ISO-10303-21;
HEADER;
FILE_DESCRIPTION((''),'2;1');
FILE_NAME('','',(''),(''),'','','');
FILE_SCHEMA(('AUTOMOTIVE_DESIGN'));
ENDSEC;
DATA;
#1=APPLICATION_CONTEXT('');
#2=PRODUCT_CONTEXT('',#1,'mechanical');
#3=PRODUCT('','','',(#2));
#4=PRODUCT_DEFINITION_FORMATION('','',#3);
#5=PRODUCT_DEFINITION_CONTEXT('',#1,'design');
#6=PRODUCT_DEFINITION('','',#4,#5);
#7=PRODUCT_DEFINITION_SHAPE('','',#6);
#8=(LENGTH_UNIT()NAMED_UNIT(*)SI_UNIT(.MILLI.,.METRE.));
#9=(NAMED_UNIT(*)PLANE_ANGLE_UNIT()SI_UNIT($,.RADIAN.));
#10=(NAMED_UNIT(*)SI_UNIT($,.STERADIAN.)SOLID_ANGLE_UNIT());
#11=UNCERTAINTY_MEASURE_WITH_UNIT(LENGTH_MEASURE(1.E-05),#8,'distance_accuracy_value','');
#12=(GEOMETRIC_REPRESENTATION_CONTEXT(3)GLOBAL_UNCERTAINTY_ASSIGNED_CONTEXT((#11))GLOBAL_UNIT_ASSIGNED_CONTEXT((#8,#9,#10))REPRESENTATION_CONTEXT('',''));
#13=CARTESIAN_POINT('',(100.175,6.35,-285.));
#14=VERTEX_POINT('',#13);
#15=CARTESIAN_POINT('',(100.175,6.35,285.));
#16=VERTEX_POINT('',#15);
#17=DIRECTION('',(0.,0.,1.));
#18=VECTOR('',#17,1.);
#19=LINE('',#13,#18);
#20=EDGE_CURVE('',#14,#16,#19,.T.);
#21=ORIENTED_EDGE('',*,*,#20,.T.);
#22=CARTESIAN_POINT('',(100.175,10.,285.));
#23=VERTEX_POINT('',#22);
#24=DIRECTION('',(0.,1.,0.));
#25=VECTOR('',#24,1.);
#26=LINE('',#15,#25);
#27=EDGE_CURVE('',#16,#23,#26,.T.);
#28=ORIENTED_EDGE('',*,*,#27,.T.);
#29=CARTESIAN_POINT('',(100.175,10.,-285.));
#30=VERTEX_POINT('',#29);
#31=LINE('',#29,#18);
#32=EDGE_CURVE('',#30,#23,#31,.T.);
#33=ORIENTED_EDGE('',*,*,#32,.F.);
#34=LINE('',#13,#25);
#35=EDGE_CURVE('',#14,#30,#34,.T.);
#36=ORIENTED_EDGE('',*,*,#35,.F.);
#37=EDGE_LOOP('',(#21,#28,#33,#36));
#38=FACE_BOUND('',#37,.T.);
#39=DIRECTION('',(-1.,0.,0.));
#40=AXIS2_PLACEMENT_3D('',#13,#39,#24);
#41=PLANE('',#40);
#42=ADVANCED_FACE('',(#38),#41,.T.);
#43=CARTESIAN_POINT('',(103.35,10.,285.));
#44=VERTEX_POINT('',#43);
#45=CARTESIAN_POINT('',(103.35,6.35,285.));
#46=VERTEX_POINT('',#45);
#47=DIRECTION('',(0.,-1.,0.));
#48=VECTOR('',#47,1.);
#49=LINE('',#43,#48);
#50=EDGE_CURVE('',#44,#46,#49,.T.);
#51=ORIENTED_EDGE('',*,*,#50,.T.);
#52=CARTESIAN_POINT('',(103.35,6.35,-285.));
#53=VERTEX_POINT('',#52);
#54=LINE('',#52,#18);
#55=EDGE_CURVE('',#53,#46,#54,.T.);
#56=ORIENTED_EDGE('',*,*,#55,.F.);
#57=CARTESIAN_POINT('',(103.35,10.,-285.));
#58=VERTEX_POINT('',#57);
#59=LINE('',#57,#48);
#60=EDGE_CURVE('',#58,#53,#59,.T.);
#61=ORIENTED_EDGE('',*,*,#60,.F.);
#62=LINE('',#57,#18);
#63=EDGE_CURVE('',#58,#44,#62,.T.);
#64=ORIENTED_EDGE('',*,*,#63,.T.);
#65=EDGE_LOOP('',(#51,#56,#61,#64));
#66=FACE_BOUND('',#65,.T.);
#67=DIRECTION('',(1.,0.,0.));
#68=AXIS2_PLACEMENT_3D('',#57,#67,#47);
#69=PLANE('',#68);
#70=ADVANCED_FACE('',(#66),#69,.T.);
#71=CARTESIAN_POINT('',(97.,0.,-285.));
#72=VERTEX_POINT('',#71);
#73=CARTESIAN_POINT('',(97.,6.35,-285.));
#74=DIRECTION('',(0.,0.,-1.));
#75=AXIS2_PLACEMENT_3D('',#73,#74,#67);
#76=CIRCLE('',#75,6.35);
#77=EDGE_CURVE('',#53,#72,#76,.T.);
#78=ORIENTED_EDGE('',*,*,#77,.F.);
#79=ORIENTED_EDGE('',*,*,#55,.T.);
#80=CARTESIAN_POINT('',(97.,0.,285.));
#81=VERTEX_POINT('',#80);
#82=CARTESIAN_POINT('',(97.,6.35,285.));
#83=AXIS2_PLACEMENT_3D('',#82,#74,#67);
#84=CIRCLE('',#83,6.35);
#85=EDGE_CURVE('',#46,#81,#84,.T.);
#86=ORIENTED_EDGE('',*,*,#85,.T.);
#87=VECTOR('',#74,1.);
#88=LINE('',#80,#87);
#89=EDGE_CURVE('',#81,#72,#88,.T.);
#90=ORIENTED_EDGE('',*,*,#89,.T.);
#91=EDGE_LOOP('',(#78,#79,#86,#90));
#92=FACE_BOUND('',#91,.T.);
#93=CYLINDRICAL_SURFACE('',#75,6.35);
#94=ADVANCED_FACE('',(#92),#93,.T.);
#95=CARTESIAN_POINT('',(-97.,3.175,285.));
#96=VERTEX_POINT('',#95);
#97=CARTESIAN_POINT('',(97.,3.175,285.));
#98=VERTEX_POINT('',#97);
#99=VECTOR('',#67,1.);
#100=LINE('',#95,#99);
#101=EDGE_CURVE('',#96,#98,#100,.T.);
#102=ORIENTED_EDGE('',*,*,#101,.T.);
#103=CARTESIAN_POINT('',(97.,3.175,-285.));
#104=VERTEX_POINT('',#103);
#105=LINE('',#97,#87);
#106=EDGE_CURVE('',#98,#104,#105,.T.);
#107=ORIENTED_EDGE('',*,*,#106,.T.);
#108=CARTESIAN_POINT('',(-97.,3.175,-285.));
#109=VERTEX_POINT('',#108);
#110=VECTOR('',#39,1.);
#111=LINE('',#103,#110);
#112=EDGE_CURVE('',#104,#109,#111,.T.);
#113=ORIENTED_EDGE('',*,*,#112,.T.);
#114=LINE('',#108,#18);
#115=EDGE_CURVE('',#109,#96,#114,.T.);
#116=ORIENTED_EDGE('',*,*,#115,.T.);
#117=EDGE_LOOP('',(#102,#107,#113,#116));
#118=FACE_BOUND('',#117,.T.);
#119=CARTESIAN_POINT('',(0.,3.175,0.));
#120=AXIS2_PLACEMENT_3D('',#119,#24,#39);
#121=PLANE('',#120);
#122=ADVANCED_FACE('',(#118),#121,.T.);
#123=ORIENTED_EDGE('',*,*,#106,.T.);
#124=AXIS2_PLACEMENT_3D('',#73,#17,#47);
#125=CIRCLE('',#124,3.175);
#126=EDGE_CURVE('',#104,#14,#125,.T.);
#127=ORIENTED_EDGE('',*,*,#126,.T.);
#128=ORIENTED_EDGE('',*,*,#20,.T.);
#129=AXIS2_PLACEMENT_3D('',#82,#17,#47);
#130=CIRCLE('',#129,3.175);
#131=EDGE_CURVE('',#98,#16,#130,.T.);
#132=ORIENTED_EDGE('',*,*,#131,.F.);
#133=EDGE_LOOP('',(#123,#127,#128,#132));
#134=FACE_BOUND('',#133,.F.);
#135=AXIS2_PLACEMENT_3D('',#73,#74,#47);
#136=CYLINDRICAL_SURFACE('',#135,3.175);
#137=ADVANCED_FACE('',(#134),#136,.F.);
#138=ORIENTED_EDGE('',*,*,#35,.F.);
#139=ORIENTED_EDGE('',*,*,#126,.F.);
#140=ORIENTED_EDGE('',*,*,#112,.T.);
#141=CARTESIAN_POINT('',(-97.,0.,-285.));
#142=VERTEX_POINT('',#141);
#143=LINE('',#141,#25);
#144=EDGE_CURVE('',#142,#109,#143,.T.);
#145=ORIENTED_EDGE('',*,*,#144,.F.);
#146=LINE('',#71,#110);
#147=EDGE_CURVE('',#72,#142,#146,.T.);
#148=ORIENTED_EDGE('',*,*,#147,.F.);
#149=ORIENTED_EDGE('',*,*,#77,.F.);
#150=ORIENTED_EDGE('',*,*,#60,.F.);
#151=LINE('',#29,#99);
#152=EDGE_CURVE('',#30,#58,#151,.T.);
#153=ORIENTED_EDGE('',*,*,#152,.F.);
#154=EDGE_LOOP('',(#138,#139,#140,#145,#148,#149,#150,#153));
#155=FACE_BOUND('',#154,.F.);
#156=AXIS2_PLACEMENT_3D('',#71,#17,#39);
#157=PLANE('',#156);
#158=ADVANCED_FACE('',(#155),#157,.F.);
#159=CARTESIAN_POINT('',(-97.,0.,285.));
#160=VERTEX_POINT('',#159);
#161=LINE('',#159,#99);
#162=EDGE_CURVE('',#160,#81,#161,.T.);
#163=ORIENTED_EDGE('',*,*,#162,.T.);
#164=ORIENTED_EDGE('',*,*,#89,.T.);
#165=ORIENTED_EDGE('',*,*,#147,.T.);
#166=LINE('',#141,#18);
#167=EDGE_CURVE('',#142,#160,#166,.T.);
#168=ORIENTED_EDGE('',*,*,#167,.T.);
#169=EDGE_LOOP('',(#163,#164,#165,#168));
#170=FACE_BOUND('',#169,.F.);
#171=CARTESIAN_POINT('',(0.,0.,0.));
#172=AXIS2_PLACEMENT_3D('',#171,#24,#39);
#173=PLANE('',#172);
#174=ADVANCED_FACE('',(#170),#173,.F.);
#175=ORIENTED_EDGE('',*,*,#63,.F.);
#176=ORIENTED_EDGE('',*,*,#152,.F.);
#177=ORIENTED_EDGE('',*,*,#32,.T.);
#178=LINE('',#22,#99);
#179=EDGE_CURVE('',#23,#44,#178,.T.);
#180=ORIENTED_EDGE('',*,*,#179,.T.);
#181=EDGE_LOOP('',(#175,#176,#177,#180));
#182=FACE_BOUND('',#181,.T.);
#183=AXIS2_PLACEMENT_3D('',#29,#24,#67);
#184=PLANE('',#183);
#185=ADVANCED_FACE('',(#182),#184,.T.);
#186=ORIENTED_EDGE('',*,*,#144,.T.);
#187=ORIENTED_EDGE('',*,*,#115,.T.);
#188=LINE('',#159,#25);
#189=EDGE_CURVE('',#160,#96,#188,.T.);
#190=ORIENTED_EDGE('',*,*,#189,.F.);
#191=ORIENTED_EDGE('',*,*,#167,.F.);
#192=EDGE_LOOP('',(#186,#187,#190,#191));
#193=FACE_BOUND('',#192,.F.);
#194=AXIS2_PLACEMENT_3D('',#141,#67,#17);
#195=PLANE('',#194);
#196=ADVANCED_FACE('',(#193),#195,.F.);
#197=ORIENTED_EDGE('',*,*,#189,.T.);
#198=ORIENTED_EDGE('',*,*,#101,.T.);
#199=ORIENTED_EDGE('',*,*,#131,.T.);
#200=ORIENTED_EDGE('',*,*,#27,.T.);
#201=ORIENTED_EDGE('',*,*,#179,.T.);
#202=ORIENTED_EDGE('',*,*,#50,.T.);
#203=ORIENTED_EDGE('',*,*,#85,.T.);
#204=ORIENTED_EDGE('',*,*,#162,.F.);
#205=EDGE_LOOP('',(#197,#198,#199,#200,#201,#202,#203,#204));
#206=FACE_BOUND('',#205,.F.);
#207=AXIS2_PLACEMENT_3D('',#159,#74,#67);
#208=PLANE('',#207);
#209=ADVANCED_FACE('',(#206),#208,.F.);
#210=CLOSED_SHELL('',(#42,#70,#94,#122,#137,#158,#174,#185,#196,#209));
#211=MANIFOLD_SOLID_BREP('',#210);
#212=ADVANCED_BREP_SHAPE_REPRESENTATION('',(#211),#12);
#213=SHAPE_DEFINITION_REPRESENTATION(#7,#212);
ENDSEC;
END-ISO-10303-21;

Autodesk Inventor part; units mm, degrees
ref_plane "YZ Plane" through (0, 0, 0) normal (1, 0, 0) x (0, 1, 0)
ref_plane "XZ Plane" through (0, 0, 0) normal (0, 1, 0) x (-1, 0, 0)
ref_plane "XY Plane" through (0, 0, 0) normal (0, 0, 1) x (1, 0, 0)
sketch "Sketch1" plane through (0, 0, 0) normal (0, 1, 0) x (-1, 0, 0)
  line L0 (97, 285) -> (-97, 285)
  line L1 (-97, 285) -> (-97, -285)
  line L2 (-97, -285) -> (97, -285)
  line L3 (97, -285) -> (97, 285)
  point P0 (0, 0)
  dimension "d0" = 194
  dimension "d1" = 570
  dimension "d2" = 97
  dimension "d3" = 285
extrude "Plate1" add sketch "Sketch1" along normal blind 3.175
sketch "Sketch3" plane through (100.175, 6.35, -285) normal (1, 0, 0) x (0, 1, 0)
  line L0 (0, 570) -> (0, 0)
  line L1 (0, 0) -> (3.65, 0)
  line L2 (3.65, 0) -> (3.65, 570)
  line L3 (3.65, 570) -> (0, 570)
edge flange "Flange1" height 10 angle 90 thickness 3.175 bend radius 3.175 thickness toward (1, 0, 0) relief tear relief width 3.175 relief depth 1.5875 edges at (97, 3.175, 0) wall of the first edge with corners at (100.175, 6.35, 285) (100.175, 6.35, -285) (100.175, 10, -285) (100.175, 10, 285)
bend "Bend1"
corner "Corner1"
equation "\"d4\" = Thickness"
equation "\"d5\" = BendReliefWidth"
equation "\"d6\" = BendReliefDepth"
equation "\"d7\" = MinimumRemnant"
equation "\"d8\" = TransitionRadius"
equation "\"d11\" = BendRadius"
equation "\"d12\" = CornerReliefSize"
equation "\"d13\" = GapSize"
equation "\"d14\" = JacobiRadiusSize"
equation "\"d2\" = 0.5 * d0"
equation "\"d3\" = 0.5 * d1"
equation "\"BendRadius\" = Thickness"
equation "\"BendReliefWidth\" = Thickness"
equation "\"BendReliefDepth\" = 0.5 * Thickness"
equation "\"CornerReliefSize\" = 4 * Thickness"
equation "\"MinimumRemnant\" = 2 * Thickness"
equation "\"TransitionRadius\" = BendRadius"
equation "\"JacobiRadiusSize\" = BendRadius"
equation "\"GapSize\" = Thickness"
equation "\"Thickness\" = 3.175"
properties part number "CO-1-01-controlsSeperator"
